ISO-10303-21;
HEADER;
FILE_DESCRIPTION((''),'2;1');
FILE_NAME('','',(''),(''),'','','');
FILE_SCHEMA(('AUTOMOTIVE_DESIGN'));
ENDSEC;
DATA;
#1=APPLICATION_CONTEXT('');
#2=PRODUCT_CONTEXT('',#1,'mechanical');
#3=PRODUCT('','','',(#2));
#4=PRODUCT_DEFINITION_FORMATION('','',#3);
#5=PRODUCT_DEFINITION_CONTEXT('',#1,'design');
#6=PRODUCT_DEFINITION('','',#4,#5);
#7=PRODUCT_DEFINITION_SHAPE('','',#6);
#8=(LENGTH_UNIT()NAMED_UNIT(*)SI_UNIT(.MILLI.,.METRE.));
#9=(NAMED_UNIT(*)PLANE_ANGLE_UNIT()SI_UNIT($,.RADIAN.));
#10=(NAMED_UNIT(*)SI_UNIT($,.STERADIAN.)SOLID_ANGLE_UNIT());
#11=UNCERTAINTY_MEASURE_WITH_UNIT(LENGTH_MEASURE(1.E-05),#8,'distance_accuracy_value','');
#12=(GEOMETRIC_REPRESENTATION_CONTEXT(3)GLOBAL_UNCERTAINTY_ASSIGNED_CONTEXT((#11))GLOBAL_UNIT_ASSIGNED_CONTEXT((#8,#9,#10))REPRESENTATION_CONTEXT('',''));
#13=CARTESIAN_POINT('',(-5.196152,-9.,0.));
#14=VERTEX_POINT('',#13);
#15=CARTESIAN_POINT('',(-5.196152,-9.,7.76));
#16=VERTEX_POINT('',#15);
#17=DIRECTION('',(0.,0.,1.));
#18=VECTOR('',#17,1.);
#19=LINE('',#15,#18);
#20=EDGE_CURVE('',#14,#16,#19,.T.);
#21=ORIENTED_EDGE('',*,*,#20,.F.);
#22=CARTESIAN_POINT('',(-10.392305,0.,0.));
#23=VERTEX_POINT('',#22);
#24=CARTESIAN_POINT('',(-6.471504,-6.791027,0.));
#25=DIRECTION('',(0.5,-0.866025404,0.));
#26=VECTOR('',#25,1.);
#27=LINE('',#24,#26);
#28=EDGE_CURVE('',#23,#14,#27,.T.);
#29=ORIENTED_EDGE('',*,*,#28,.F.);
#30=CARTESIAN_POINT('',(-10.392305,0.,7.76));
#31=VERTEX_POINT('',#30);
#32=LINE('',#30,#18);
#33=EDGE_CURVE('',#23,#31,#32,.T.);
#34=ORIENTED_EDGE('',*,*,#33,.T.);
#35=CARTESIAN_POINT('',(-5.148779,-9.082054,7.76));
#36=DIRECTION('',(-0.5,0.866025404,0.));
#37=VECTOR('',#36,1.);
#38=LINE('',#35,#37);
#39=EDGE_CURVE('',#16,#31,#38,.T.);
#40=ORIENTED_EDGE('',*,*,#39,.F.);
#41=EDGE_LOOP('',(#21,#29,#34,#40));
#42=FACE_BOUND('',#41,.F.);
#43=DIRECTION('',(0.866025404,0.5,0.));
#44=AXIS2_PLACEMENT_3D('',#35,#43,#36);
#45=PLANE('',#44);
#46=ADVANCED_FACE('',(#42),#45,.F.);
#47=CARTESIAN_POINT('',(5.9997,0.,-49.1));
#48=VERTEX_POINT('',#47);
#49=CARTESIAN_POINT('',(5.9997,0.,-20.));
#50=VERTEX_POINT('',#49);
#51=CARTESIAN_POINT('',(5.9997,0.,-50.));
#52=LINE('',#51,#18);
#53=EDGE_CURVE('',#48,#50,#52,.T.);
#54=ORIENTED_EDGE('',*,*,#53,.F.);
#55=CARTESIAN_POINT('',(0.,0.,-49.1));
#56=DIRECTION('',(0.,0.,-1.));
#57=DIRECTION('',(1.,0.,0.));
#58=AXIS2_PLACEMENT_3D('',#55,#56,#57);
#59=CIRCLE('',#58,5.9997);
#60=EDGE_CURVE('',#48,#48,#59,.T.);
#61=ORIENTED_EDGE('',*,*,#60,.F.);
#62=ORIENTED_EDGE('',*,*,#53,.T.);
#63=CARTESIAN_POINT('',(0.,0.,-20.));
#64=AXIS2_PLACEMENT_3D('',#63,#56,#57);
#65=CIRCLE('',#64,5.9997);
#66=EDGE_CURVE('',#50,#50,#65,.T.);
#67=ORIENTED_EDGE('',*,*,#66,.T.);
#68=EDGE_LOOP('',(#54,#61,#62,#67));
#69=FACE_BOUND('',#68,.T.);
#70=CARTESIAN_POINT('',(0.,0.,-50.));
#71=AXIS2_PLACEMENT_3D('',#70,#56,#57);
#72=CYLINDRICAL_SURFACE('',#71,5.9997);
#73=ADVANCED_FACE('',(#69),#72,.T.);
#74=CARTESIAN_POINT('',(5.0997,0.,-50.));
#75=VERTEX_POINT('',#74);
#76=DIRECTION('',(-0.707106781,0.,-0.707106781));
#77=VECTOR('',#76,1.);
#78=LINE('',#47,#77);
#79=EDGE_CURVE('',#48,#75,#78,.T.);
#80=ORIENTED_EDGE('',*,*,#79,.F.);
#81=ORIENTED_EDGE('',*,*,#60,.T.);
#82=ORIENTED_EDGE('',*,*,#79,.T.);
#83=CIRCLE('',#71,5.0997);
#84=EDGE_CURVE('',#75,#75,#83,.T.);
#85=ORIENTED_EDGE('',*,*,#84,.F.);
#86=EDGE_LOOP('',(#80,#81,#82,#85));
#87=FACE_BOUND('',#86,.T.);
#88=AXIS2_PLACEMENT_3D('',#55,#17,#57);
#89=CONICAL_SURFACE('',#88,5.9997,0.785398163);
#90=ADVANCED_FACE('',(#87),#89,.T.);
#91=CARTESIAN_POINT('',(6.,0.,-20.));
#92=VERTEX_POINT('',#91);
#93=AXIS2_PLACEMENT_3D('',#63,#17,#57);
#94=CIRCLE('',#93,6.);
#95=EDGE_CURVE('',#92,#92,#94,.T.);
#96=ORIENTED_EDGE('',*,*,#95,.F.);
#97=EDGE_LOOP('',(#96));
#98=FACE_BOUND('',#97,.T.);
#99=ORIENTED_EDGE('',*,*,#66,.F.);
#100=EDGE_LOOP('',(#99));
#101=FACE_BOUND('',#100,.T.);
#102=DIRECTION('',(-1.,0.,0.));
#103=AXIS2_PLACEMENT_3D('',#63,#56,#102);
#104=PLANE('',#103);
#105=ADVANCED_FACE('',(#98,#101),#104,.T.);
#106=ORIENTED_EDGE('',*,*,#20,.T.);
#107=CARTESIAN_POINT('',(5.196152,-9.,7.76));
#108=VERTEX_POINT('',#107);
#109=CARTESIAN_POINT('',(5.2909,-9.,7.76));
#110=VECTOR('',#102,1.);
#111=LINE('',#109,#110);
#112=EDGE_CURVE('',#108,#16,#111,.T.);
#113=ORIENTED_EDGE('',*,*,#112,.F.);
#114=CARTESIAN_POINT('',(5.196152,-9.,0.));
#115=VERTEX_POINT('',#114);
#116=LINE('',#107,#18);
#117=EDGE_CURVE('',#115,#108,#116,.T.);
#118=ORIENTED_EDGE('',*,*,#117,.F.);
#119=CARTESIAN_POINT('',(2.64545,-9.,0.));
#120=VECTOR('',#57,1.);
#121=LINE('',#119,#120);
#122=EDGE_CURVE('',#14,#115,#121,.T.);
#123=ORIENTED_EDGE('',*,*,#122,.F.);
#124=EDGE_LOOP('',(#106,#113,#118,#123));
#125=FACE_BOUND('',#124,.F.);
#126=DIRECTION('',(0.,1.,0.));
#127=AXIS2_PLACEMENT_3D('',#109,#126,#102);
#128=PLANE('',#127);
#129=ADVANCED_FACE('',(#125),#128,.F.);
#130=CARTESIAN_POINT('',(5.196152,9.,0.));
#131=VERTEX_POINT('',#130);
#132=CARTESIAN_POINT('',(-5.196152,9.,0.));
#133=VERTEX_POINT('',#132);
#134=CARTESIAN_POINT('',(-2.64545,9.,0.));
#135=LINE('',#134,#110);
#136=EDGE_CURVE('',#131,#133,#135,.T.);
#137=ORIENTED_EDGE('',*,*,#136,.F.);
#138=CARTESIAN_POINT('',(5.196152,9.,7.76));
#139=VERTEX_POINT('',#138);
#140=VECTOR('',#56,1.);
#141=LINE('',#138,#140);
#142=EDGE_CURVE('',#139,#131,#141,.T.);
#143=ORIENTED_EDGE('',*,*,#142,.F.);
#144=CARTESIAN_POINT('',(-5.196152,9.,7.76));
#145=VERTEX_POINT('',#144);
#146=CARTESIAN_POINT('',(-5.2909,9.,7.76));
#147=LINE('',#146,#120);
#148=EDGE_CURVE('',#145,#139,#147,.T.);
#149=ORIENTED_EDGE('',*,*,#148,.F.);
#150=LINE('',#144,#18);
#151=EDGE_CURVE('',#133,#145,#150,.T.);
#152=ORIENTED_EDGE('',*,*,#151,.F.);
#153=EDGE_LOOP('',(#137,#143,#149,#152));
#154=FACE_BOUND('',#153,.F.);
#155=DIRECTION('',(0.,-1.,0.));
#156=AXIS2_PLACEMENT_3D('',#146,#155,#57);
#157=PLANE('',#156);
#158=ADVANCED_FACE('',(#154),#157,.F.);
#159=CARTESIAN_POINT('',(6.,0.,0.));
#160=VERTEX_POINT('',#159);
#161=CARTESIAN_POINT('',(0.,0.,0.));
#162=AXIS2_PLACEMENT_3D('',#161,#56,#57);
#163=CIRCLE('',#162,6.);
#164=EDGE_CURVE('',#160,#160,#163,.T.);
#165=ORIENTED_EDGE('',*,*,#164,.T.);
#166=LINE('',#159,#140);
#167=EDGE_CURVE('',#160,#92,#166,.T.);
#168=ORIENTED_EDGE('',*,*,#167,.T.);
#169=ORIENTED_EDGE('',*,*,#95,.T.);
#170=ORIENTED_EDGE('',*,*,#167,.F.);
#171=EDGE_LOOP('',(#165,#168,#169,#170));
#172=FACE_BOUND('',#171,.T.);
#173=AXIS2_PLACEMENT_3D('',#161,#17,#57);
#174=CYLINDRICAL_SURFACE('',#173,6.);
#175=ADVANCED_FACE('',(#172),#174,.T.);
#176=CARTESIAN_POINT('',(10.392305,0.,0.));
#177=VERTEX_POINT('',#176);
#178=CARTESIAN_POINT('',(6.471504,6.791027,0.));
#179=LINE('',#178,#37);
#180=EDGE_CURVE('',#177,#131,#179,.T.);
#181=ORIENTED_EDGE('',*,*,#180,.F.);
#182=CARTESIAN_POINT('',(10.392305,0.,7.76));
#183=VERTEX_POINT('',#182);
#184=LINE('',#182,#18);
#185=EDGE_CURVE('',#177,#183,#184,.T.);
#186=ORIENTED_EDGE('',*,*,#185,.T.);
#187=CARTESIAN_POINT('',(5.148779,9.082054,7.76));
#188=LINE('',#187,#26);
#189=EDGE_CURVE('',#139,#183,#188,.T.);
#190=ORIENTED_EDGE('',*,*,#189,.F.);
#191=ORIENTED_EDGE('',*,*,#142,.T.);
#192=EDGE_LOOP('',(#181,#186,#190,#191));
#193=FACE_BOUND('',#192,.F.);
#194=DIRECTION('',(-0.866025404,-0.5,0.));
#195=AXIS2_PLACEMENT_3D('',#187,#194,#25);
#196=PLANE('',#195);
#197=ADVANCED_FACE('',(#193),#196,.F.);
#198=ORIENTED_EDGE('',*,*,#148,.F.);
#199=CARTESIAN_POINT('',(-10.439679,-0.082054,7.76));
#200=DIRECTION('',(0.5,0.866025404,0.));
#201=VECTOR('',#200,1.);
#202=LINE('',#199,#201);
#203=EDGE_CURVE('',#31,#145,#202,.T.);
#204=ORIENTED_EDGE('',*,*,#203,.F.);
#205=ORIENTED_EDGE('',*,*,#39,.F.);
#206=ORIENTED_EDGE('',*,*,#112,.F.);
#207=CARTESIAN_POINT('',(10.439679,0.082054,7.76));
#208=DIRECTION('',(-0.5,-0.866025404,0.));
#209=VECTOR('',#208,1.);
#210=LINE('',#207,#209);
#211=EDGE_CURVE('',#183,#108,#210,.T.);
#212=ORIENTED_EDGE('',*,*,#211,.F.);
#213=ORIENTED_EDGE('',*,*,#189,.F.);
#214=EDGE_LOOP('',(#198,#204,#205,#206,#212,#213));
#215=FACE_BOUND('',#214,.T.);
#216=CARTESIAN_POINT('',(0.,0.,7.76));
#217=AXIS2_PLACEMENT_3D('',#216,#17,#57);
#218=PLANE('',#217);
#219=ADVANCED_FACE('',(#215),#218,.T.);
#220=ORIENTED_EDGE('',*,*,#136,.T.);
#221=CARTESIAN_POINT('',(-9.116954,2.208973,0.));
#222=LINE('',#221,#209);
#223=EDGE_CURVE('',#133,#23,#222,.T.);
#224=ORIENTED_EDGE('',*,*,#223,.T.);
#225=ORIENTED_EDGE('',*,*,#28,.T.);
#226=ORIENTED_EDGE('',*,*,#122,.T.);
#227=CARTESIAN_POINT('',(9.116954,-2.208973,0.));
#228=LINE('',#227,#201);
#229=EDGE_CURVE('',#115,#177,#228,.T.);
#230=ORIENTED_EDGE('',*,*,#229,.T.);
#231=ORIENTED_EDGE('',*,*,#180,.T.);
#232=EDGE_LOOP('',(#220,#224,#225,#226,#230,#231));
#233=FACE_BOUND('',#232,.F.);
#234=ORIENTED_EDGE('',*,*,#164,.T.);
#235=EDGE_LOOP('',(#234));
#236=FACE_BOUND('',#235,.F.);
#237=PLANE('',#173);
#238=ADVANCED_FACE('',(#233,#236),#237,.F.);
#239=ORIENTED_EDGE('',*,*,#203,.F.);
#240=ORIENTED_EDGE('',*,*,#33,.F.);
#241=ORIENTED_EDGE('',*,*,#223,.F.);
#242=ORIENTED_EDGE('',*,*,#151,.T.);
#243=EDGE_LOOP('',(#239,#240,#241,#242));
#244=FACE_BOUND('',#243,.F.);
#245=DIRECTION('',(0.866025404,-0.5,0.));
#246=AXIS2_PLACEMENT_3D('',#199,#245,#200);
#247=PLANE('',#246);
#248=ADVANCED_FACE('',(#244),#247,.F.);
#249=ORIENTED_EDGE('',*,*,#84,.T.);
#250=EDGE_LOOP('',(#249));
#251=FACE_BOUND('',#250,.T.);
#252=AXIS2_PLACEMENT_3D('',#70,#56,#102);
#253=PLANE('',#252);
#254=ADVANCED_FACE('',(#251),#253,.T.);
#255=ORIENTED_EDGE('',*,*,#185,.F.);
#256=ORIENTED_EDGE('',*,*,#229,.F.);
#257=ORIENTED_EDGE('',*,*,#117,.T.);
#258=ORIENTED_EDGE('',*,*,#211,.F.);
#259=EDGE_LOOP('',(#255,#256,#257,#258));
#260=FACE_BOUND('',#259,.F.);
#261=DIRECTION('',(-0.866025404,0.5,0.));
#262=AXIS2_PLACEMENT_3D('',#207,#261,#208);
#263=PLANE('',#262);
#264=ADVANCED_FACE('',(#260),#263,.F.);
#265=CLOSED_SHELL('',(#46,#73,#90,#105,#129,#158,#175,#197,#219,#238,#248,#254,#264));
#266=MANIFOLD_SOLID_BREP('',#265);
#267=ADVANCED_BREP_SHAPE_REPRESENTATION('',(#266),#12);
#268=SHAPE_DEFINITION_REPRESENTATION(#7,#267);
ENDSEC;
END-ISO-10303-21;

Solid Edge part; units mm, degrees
sketch "Sketch1" plane through (0, 0, 0) normal (0, 0, 1) x (1, 0, 0)
  circle A0 centre (0, 0) radius 10.44
  dimension "D1" = 20.88
extrude "Protrusion1" add sketch "Sketch1" along normal blind 7.76
sketch "Sketch2" plane through (0, 0, 0) normal (0, 0, -1) x (1, 0, 0)
  circle A0 centre (0, 0) radius 6
extrude "Protrusion2" add sketch "Sketch2" along normal blind 50
sketch "Sketch3" plane through (0, 0, -50) normal (0, 0, -1) x (1, 0, 0)
  circle A0 centre (0, 0) radius 5.9997
extrude "Cutout1" cut sketch "Sketch3" against normal blind 30 flip side to cut
chamfer "Chamfer_1" distance 0.9 angle 45 1 edges at (-5.9997, 0, -50)
sketch "Sketch4" plane through (0, 0, 7.76) normal (0, 0, 1) x (1, 0, 0)
  line L0 (-5.2909, 9) -> (5.2909, 9)
  dimension "D1" = 18
extrude "Cutout2" cut sketch "Sketch4" against normal up to next material side at (0, 9.05, 7.76)
pattern_circular "Pattern1" count 6 over 360 about axis through (0, 0, 7.76) along (0, 0, 1) of "Cutout2"
properties part number "24104924"
